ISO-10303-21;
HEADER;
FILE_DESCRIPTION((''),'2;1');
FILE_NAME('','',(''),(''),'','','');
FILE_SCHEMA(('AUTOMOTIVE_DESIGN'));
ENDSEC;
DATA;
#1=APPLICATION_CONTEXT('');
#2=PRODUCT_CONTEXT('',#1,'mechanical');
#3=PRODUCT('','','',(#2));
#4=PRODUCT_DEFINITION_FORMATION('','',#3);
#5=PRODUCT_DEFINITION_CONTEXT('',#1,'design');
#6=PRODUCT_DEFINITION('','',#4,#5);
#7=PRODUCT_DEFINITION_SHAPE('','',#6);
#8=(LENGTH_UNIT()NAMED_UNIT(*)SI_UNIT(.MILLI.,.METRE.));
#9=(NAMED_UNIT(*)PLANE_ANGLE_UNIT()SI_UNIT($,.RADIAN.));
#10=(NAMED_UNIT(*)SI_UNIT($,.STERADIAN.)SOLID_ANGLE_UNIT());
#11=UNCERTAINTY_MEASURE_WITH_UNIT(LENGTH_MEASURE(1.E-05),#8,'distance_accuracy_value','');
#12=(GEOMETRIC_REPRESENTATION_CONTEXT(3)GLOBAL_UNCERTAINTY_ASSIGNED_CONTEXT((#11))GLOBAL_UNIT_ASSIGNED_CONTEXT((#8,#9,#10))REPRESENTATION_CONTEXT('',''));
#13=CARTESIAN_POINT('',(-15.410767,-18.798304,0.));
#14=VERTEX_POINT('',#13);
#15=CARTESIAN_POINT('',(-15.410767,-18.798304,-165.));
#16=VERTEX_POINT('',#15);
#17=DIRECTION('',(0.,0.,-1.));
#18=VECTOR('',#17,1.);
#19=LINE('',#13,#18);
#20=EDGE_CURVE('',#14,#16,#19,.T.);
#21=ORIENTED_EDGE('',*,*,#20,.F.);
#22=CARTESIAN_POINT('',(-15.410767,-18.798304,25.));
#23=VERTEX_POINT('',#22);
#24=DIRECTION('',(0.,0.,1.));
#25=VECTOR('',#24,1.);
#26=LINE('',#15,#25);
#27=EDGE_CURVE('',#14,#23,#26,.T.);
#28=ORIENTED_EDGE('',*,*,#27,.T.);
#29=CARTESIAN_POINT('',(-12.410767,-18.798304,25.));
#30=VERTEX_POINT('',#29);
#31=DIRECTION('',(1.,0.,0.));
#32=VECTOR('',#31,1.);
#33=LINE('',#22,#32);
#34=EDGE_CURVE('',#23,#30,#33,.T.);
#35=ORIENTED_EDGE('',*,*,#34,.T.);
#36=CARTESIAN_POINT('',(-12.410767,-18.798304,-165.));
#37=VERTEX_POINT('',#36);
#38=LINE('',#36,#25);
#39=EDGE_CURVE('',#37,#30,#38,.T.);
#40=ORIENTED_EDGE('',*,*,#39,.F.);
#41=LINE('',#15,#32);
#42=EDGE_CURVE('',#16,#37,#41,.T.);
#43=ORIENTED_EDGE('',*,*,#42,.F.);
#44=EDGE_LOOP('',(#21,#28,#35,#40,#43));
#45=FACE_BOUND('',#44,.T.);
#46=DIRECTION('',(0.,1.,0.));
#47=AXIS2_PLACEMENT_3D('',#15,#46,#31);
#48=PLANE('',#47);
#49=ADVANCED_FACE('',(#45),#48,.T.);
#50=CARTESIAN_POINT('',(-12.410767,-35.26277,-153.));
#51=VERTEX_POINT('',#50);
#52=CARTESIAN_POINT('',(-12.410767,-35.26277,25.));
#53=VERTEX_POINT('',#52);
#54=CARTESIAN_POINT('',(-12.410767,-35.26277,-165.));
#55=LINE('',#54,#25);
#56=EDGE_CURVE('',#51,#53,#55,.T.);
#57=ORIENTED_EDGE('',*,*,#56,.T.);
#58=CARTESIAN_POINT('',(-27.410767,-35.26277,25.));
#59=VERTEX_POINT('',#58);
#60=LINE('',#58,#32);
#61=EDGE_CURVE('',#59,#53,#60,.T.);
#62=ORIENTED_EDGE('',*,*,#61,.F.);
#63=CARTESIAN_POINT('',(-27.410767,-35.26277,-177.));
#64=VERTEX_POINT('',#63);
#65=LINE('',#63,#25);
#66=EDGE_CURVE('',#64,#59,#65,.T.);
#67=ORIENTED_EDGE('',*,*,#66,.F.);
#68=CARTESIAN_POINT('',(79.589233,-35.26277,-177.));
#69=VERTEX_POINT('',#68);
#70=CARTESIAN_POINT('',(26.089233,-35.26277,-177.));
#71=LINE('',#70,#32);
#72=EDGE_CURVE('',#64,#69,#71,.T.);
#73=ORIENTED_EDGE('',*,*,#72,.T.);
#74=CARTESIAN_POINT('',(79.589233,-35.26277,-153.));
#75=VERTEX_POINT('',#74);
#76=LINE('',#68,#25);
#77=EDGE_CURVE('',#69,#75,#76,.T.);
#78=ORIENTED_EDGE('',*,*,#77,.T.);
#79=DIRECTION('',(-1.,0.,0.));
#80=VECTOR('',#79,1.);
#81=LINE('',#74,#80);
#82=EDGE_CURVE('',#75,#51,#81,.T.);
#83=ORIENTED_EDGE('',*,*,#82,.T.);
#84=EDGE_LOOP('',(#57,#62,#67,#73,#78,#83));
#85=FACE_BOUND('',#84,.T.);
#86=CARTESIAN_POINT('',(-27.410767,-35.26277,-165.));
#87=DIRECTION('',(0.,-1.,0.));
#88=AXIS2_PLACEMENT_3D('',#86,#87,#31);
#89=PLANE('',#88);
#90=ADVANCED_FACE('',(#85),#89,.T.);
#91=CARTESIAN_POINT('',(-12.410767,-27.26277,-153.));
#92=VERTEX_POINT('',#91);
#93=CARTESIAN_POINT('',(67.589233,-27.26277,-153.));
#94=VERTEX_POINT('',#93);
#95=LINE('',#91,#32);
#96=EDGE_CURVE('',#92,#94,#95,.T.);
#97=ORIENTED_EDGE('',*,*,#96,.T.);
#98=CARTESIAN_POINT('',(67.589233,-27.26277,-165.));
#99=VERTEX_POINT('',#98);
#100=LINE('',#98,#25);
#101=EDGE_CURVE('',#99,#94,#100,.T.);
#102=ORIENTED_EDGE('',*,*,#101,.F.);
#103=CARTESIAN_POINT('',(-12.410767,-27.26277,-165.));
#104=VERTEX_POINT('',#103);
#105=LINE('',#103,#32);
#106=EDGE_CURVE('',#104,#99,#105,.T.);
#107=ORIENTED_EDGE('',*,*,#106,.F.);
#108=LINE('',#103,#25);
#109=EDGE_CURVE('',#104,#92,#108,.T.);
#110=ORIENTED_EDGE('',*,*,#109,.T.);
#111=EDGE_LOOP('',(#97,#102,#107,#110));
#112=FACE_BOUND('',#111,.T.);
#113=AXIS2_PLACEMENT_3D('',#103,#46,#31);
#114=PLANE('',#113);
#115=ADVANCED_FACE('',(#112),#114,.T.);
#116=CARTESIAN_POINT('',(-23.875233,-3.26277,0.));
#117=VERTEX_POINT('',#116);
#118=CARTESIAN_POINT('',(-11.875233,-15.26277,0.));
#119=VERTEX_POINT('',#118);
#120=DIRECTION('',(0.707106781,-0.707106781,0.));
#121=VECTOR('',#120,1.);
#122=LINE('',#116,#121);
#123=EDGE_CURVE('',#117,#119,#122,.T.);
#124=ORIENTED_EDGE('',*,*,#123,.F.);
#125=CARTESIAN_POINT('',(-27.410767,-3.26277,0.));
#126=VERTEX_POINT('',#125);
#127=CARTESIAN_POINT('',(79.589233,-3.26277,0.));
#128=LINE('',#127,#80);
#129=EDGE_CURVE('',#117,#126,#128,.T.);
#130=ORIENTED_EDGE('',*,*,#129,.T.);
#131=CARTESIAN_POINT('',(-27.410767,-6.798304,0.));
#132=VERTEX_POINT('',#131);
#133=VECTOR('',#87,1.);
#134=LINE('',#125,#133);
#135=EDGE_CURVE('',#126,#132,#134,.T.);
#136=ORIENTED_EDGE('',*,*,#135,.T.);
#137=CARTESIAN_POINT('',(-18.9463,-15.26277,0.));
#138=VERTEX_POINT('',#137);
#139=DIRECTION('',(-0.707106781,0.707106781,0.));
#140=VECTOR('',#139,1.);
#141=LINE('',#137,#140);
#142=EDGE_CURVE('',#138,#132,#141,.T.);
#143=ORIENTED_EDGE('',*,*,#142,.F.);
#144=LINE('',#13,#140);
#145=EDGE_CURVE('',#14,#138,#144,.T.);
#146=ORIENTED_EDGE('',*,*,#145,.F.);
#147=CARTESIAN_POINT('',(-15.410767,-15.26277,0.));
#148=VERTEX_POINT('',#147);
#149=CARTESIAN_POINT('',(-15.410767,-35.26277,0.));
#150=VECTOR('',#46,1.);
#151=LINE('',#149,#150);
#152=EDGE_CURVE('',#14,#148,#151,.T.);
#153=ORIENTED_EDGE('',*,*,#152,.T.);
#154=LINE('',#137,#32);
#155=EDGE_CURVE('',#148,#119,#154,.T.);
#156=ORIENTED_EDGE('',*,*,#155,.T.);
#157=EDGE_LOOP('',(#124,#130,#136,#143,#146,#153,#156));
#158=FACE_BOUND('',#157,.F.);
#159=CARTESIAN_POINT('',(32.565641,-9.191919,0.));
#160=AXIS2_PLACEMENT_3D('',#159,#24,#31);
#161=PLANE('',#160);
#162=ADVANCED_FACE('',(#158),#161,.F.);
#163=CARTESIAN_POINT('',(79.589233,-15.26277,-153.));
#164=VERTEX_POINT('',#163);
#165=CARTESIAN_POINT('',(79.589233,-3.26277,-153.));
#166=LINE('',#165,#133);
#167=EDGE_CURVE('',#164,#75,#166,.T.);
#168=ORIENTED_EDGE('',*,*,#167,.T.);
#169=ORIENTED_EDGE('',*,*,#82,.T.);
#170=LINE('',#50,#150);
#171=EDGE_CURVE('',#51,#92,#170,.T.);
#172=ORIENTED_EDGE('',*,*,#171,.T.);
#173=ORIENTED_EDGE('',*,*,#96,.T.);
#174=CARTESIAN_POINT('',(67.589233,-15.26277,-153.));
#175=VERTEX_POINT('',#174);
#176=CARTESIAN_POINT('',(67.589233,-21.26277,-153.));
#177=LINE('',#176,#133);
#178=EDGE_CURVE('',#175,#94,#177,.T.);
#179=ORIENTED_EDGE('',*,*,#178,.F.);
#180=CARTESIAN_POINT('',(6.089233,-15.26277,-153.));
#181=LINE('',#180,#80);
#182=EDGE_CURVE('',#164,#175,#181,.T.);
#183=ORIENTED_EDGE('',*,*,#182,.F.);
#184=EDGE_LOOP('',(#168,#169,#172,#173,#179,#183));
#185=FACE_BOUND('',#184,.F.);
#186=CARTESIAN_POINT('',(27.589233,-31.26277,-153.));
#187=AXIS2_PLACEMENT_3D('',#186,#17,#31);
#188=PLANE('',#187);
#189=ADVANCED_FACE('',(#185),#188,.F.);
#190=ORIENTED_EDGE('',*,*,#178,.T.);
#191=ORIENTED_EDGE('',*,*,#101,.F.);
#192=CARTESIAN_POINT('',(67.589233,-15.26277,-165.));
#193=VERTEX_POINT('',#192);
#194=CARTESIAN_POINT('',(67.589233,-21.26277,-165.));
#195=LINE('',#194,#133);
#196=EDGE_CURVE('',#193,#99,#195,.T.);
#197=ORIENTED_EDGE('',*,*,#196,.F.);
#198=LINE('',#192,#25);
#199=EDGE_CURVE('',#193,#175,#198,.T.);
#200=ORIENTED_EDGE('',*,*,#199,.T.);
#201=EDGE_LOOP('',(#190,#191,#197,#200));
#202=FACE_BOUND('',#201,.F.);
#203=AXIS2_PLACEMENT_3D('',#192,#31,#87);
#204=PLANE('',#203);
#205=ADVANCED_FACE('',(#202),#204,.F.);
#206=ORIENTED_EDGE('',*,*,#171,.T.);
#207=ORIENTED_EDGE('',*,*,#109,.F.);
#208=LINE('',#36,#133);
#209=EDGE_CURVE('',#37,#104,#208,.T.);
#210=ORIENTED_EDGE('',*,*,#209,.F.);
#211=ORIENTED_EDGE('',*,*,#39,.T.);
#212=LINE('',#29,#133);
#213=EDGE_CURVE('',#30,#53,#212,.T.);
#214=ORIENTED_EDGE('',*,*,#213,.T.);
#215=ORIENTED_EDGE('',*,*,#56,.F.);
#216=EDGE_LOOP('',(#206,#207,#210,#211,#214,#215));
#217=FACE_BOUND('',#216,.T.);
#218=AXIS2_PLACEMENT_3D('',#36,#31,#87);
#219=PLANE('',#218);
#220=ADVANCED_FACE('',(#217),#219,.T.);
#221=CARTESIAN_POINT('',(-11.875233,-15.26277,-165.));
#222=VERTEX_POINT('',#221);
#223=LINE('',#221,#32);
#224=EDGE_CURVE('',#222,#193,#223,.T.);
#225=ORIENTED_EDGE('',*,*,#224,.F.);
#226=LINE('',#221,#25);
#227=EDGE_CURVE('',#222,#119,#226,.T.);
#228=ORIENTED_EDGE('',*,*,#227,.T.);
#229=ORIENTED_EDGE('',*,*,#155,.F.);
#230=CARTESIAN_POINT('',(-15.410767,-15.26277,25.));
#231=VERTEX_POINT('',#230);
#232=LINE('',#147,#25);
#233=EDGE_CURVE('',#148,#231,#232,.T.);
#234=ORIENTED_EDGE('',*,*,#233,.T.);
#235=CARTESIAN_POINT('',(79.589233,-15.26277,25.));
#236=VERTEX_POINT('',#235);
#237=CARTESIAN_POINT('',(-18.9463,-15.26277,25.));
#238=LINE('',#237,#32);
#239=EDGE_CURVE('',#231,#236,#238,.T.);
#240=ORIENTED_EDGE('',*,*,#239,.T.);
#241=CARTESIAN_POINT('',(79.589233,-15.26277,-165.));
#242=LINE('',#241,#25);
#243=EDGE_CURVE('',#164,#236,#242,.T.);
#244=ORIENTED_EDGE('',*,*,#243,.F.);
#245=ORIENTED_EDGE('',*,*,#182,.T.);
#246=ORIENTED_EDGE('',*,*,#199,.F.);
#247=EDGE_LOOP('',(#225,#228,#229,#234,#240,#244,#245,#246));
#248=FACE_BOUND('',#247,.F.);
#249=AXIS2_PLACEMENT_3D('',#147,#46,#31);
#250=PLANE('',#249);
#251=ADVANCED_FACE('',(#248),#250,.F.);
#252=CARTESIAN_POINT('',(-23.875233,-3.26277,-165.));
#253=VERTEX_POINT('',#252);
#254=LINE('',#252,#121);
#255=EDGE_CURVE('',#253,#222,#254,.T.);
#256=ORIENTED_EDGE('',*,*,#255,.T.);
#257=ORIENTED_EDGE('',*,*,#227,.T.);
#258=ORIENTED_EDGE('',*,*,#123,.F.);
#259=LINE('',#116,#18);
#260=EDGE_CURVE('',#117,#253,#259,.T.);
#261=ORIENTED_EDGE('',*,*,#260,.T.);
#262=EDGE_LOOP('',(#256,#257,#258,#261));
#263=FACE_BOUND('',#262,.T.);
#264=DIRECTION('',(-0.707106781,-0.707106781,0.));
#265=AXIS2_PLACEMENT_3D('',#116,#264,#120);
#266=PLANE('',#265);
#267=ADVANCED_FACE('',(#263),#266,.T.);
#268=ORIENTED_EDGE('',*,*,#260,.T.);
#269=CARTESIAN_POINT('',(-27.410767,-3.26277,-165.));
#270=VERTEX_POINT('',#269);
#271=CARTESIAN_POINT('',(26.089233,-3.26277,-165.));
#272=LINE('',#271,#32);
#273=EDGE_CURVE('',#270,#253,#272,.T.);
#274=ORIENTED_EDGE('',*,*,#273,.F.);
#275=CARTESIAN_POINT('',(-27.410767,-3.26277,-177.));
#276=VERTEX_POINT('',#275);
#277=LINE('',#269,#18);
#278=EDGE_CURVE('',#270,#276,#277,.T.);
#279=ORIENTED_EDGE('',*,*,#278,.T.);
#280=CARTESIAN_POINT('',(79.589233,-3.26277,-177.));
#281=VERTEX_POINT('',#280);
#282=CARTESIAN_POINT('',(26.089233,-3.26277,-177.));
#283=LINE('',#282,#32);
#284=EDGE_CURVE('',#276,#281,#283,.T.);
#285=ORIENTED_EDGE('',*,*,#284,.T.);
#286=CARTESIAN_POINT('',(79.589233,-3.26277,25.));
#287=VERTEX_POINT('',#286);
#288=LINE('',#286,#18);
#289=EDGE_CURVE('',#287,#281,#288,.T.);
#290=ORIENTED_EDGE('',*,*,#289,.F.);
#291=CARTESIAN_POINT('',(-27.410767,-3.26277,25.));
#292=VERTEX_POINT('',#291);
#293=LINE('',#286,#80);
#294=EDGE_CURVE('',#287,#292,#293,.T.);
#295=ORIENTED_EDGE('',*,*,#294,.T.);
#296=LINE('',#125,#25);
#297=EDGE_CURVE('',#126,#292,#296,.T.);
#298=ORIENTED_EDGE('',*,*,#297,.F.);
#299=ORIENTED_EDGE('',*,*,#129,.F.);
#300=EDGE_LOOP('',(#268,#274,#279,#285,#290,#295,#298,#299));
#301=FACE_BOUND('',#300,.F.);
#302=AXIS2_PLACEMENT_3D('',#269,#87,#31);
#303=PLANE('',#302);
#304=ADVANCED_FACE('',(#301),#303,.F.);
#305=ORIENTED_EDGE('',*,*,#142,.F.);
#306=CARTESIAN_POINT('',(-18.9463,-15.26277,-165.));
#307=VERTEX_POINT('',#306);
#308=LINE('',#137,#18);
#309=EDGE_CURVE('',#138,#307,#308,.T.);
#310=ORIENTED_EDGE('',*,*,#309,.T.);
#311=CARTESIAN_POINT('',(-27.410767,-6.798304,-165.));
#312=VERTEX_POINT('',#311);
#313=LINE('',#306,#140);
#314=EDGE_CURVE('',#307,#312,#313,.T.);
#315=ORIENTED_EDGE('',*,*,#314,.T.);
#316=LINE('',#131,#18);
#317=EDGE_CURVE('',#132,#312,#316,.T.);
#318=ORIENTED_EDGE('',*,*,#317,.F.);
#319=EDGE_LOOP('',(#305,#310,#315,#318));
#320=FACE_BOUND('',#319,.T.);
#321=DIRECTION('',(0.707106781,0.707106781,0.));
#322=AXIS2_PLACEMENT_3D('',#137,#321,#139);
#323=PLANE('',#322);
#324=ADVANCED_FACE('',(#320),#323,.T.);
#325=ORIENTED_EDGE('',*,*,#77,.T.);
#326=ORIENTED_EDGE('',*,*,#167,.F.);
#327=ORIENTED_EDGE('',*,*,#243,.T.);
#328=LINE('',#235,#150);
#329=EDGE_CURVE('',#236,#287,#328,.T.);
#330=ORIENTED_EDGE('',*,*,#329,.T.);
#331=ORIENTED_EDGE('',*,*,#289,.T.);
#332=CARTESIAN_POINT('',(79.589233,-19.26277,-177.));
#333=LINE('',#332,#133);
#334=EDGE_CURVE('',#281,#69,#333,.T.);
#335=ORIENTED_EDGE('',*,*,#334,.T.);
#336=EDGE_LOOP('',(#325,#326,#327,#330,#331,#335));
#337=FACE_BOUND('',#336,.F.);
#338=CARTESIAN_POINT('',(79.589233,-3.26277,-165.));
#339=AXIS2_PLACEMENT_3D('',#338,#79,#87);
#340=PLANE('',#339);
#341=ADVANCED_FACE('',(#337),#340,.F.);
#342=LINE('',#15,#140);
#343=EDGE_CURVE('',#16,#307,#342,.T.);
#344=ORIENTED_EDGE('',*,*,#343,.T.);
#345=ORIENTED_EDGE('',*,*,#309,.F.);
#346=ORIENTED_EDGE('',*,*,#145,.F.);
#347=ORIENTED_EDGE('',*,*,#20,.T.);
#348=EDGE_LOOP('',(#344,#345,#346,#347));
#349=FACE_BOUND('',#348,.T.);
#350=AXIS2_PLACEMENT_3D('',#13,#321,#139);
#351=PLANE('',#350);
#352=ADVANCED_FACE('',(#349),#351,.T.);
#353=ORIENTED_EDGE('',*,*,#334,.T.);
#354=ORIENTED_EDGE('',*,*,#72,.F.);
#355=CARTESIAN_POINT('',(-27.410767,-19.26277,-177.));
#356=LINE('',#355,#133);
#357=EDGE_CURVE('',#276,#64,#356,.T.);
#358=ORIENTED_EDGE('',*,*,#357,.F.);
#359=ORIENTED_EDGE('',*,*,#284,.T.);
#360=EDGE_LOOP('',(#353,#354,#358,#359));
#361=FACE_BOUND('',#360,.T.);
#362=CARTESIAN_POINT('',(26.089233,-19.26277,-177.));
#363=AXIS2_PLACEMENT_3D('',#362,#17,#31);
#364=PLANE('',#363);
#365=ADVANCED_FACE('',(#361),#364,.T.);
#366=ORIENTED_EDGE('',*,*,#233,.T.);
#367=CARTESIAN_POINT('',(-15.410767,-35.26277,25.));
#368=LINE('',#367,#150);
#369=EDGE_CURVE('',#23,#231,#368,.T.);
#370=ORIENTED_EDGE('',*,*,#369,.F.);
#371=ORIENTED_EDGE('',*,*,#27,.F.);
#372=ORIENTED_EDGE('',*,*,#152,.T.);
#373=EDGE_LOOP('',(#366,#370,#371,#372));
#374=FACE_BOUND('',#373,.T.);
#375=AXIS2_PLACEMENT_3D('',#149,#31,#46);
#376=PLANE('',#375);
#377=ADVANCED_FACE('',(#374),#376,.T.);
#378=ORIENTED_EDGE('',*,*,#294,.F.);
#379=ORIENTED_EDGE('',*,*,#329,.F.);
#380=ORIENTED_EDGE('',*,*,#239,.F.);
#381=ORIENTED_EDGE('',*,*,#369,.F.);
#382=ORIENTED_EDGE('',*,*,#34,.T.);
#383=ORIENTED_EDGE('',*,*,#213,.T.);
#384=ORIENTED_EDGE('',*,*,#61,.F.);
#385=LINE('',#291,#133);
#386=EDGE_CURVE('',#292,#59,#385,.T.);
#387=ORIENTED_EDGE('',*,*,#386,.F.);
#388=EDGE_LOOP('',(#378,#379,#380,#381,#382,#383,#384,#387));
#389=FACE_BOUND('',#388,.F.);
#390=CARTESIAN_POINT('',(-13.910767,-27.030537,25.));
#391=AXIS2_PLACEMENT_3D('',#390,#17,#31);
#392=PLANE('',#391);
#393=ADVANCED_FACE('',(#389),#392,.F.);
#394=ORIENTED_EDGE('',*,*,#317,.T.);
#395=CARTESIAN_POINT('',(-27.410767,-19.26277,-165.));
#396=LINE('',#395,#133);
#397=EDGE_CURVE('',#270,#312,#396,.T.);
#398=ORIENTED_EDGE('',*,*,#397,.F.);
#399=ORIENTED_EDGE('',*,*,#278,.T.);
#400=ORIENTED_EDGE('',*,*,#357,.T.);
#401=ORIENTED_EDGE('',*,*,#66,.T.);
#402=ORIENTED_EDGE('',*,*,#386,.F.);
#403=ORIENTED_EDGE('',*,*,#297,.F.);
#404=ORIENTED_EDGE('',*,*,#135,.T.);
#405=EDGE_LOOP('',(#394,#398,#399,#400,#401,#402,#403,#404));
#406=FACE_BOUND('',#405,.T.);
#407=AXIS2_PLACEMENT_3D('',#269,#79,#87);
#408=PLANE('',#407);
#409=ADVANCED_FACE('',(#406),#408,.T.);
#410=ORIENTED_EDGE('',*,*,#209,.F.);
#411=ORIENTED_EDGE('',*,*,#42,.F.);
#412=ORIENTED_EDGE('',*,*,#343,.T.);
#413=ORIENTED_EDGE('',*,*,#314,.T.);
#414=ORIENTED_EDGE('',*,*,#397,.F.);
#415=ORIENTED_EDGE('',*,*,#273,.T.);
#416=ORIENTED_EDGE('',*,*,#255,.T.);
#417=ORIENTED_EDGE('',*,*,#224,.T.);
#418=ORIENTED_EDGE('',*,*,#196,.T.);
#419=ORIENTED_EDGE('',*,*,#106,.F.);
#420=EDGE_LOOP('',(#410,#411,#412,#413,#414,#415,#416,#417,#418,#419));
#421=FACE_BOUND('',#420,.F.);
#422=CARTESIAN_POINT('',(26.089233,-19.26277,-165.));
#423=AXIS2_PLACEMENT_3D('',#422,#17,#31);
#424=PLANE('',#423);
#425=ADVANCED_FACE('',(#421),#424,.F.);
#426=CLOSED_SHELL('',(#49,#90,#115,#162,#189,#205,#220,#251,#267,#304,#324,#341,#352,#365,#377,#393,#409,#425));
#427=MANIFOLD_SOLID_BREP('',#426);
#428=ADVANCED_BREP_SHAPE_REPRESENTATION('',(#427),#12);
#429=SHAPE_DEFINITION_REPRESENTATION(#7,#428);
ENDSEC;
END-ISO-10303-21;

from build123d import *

# Parameters (mm, degrees)
F1_DEPTH = 25
F2_DEPTH = 165
F4_DEPTH = 190
F5_W     = 12
F5_H     = 8
F5_H_2   = 12
F6_DEPTH = 12
F7_W     = 107
F7_H     = 32
F8_DEPTH = 12


with BuildPart() as f1:
    # F0 (on Top) → F1 (new body)
    with BuildSketch(Plane.XY):
        Polygon((-15.4107665035, -11.7272357842), (-11.8752325976, -15.2627696901), (79.5892334965, -15.2627696901), (79.5892334965, -3.2627696901), (-15.4107665035, -3.2627696901), align=None)
        Polygon((-23.8752325976, -3.2627696901), (-15.4107665035, -11.7272357842), (-15.4107665035, -3.2627696901), align=None)
        Polygon((-18.9463004094, -15.2627696901), (-15.4107665035, -15.2627696901), (-27.4107665035, -3.2627696901), (-27.4107665035, -6.7983035961), align=None)
        Polygon((-27.4107665035, -15.2627696901), (-18.9463004094, -15.2627696901), (-27.4107665035, -6.7983035961), align=None)
        Polygon((-15.4107665035, -18.7983035961), (-18.9463004094, -15.2627696901), (-27.4107665035, -15.2627696901), (-27.4107665035, -35.2627696901), (-15.4107665035, -35.2627696901), align=None)
        Polygon((-27.4107665035, -3.2627696901), (-15.4107665035, -15.2627696901), (-15.4107665035, -11.7272357842), (-23.8752325976, -3.2627696901), align=None)
        Polygon((-15.4107665035, -11.7272357842), (-15.4107665035, -15.2627696901), (-11.8752325976, -15.2627696901), align=None)
        Polygon((-15.4107665035, -18.7983035961), (-15.4107665035, -15.2627696901), (-18.9463004094, -15.2627696901), align=None)
    extrude(amount=F1_DEPTH)

    # F0 (on Top) → F2 (join)
    with BuildSketch(Plane.XY):
        Polygon((-15.4107665035, -18.7983035961), (-18.9463004094, -15.2627696901), (-27.4107665035, -15.2627696901), (-27.4107665035, -35.2627696901), (-15.4107665035, -35.2627696901), align=None)
        Polygon((-23.8752325976, -3.2627696901), (-15.4107665035, -11.7272357842), (-15.4107665035, -3.2627696901), align=None)
        Polygon((-15.4107665035, -11.7272357842), (-11.8752325976, -15.2627696901), (79.5892334965, -15.2627696901), (79.5892334965, -3.2627696901), (-15.4107665035, -3.2627696901), align=None)
        Polygon((-27.4107665035, -15.2627696901), (-18.9463004094, -15.2627696901), (-27.4107665035, -6.7983035961), align=None)
    extrude(amount=-F2_DEPTH)

    # F3 (on face) → F4 (join, through all)
    with BuildSketch(Plane(origin=(0, 0, -165), x_dir=(1, 0, 0), z_dir=(0, 0, -1))):
        Polygon((-15.4107665035, 30.7983035961), (-15.4107665035, 18.7983035961), (-12.4107665035, 18.7983035961), (-12.4107665035, 30.7983035961), (-12.4107665035, 35.2627696901), (-15.4107665035, 35.2627696901), align=None)
    extrude(amount=-F4_DEPTH)

    # F5 (on face) → F6 (join)
    with BuildSketch(Plane(origin=(0, 0, -165), x_dir=(1, 0, 0), z_dir=(0, 0, -1))):
        Polygon((-12.4107665035, 35.2627696901), (-12.4107665035, 30.7983035961), (-12.4107665035, 27.2627696901), (67.5892334965, 27.2627696901), (67.5892334965, 35.2627696901), align=None)
        with Locations((73.5892334965, 31.2627696901)):
            Rectangle(F5_W, F5_H)
        with Locations((73.5892334965, 21.2627696901)):
            Rectangle(F5_W, F5_H_2)
        Polygon((79.5892334965, 15.2627696901), (67.5892334965, 15.2627696901), (-11.8752325976, 15.2627696901), (-23.8752325976, 3.2627696901), (79.5892334965, 3.2627696901), align=None)
    extrude(amount=-F6_DEPTH)

    # F7 (on face) → F8 (join)
    with BuildSketch(Plane(origin=(0, 0, -165), x_dir=(1, 0, 0), z_dir=(0, 0, -1))):
        with Locations((26.0892334965, 19.2627696901)):
            Rectangle(F7_W, F7_H)
    extrude(amount=F8_DEPTH)


solid = f1.part
